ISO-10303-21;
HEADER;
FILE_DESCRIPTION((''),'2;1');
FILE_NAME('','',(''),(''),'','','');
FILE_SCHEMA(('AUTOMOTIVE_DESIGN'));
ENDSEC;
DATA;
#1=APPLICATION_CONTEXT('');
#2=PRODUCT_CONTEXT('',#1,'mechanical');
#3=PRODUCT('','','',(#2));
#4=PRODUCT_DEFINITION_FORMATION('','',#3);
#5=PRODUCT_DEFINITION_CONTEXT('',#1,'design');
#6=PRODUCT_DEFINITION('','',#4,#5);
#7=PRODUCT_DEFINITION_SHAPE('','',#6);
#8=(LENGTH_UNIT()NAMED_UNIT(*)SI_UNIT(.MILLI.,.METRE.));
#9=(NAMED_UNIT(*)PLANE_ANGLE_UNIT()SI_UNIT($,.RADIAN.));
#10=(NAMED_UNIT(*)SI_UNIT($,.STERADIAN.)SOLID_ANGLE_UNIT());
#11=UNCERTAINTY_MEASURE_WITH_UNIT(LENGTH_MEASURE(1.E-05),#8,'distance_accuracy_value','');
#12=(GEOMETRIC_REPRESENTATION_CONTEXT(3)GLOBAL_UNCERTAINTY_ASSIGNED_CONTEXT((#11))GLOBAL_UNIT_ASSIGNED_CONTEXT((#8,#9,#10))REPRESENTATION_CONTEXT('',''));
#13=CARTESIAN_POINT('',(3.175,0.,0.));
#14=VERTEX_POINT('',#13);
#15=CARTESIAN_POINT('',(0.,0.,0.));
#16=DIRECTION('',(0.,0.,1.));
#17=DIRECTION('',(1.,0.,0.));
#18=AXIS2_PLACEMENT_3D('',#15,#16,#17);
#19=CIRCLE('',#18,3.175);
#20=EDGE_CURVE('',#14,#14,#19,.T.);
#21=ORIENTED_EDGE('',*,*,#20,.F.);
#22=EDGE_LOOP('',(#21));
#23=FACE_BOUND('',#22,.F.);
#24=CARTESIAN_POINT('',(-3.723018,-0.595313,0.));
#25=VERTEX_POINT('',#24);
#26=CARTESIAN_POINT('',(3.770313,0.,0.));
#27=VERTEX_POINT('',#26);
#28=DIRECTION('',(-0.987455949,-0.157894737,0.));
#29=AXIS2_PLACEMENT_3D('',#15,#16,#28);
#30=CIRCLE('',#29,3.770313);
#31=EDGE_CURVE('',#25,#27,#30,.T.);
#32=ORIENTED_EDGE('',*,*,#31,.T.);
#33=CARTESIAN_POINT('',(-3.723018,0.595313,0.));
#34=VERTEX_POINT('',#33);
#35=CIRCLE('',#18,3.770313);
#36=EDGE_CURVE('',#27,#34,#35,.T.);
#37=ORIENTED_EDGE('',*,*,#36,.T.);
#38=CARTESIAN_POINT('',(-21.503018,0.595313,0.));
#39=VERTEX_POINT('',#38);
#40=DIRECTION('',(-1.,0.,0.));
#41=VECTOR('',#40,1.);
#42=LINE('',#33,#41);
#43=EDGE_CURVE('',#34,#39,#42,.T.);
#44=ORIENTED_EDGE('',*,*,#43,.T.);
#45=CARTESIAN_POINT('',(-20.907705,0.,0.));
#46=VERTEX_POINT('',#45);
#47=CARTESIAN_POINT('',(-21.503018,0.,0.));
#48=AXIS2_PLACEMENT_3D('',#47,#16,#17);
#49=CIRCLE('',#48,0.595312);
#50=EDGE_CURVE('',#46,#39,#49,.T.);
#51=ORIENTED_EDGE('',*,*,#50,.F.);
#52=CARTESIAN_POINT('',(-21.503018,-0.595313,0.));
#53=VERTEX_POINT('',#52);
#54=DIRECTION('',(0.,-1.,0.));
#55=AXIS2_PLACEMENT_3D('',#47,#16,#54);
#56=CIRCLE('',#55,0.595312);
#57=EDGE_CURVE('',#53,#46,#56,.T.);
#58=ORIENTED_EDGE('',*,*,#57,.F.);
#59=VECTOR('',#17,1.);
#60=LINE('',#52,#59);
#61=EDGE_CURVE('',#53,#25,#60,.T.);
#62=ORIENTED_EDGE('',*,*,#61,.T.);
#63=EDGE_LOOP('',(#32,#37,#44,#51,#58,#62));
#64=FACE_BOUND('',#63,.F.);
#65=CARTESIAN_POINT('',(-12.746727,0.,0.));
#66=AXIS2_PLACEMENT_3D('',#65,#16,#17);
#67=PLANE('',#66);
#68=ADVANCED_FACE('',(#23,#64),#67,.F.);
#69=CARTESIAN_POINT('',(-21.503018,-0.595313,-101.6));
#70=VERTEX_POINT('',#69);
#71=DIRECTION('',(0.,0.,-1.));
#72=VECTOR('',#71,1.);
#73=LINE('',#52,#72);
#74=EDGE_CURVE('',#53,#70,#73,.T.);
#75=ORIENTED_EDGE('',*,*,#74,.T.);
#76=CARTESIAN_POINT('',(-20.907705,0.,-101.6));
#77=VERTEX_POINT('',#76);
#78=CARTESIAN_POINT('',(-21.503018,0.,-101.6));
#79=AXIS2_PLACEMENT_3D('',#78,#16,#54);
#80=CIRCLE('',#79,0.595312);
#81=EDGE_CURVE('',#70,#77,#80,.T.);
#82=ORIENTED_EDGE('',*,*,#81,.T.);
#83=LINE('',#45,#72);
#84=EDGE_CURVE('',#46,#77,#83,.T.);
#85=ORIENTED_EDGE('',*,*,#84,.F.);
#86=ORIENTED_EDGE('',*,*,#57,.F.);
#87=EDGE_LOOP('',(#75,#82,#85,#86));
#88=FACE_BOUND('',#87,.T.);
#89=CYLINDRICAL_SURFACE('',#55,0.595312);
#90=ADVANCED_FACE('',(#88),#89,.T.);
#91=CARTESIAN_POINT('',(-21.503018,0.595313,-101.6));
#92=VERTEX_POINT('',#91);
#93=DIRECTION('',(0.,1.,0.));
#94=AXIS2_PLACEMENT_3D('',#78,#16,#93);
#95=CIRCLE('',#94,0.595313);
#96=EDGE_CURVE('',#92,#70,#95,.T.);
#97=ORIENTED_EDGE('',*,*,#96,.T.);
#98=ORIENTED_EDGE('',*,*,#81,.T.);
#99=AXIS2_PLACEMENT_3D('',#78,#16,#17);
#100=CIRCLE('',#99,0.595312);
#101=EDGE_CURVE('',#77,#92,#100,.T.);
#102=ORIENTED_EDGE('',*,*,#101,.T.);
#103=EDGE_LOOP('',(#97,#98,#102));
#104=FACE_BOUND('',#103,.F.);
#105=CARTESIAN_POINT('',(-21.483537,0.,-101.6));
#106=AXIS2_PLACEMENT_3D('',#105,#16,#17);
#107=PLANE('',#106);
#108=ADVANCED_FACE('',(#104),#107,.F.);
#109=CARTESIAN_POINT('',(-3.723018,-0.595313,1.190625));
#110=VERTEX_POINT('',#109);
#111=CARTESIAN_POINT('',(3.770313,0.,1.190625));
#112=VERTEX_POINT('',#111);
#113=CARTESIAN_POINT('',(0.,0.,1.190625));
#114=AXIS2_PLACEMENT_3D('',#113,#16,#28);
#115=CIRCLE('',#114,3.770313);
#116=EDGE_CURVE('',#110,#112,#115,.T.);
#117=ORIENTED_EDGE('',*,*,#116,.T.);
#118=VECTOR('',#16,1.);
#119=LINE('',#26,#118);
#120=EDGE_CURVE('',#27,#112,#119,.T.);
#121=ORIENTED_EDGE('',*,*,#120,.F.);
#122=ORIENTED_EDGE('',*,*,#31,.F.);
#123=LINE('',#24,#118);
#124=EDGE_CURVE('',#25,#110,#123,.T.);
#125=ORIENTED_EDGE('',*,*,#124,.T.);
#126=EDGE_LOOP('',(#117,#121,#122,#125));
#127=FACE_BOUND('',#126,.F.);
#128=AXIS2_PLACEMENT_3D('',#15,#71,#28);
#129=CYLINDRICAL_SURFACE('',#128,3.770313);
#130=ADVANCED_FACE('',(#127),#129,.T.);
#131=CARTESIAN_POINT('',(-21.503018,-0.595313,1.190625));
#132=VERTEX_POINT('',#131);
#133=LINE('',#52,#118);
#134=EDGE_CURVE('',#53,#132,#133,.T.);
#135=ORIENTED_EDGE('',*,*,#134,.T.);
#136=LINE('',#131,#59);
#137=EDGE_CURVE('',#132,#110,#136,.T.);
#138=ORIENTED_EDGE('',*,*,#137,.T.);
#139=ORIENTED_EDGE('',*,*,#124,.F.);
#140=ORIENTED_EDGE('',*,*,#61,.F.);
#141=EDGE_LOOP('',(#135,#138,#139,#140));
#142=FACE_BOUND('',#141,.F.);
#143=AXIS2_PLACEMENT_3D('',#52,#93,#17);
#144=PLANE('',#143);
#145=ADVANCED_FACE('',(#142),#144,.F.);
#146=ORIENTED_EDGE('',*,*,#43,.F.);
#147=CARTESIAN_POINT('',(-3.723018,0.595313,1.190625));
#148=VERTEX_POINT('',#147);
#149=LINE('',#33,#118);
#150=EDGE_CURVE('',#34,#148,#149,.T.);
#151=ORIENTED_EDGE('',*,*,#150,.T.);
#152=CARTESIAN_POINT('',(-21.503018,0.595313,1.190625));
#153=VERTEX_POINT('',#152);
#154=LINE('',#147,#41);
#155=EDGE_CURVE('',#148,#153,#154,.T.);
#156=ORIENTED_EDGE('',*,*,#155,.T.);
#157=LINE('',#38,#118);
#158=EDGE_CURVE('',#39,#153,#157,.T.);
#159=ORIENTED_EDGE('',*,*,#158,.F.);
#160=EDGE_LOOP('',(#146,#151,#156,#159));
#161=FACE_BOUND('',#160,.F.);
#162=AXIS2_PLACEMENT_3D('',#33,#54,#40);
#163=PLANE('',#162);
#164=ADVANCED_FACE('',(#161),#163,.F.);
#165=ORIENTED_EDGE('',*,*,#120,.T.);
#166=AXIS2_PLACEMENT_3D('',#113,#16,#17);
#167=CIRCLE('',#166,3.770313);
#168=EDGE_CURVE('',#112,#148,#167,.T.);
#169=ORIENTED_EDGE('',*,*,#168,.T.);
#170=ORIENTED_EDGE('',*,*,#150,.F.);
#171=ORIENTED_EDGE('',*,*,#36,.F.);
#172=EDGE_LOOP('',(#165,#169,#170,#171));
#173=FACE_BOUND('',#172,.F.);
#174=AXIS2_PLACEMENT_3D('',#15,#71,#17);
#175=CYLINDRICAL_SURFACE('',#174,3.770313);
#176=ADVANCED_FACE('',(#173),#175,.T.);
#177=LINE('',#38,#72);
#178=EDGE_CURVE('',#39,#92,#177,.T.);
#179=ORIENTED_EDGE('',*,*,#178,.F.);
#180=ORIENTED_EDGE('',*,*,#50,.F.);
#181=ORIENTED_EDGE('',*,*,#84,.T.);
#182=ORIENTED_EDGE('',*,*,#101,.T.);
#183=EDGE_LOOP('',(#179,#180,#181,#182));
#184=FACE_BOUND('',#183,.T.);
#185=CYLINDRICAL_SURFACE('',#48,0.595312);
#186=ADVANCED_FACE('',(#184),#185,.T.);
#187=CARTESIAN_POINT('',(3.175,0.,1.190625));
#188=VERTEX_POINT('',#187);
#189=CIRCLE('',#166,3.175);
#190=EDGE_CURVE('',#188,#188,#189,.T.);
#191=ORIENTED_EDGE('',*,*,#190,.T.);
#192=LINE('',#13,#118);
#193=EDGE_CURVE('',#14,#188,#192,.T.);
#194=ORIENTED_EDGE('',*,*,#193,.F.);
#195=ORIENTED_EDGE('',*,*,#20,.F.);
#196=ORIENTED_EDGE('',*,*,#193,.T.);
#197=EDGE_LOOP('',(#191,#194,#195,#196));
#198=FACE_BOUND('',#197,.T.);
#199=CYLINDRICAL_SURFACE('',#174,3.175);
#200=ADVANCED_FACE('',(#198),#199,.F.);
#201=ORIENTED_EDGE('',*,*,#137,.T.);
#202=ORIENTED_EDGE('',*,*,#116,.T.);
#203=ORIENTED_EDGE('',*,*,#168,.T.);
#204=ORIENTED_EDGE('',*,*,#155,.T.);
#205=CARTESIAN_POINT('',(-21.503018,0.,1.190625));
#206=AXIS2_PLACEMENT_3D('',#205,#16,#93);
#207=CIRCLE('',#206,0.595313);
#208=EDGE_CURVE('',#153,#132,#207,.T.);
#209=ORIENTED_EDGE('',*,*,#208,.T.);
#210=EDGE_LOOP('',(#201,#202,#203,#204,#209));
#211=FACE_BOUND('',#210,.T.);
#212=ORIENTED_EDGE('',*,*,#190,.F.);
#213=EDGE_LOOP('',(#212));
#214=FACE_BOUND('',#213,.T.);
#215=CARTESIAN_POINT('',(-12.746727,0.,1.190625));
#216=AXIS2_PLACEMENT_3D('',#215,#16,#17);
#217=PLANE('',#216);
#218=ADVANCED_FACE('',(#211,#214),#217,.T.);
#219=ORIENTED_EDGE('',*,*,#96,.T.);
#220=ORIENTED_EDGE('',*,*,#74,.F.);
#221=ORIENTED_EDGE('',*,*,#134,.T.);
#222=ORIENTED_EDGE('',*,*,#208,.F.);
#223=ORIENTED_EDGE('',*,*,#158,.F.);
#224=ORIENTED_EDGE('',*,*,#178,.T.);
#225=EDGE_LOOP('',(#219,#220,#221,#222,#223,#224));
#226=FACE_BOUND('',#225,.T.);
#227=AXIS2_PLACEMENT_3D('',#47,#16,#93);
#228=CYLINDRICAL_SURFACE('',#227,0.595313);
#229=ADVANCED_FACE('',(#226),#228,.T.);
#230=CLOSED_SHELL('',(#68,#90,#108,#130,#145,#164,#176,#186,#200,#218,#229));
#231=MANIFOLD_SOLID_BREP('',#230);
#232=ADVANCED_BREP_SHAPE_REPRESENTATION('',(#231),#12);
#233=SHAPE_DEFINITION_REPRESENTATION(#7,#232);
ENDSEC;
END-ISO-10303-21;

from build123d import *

# Parameters (mm, degrees)
F0_R     = 3.175
F1_DEPTH = 1.190625
F2_DEPTH = 101.6


# Not quite as in the source:
# - a length typed as a fraction of an inch, garbled in the dataset ("3 / 203.2 mm" for 3/8 in), is restored


with BuildPart() as f1:
    # F0 (on Top) → F1 (new body)
    with BuildSketch(Plane.XY):
        with BuildLine():
            ThreePointArc((-3.7230175094, -0.5953125), (-3.7703125, 0), (-3.7230175094, 0.5953125))
            Line((-3.7230175094, 0.5953125), (-21.5030175094, 0.5953125))
            ThreePointArc((-21.5030175094, 0.5953125), (-21.0820680037, 0.4209495057), (-20.9077050094, 0))
            ThreePointArc((-20.9077050094, 0), (-21.0820680037, -0.4209495057), (-21.5030175094, -0.5953125))
            Line((-21.5030175094, -0.5953125), (-3.7230175094, -0.5953125))
        make_face()
        with BuildLine():
            ThreePointArc((-3.7230175094, -0.5953125), (0.2985941178, -3.7584701543), (3.7703125, 0))
            ThreePointArc((3.7703125, 0), (0.2985941178, 3.7584701543), (-3.7230175094, 0.5953125))
            ThreePointArc((-3.7230175094, 0.5953125), (-3.7703125, 0), (-3.7230175094, -0.5953125))
        make_face()
        Circle(F0_R, mode=Mode.SUBTRACT)
        with BuildLine():
            ThreePointArc((-20.9077050094, 0), (-21.0820680037, 0.4209495057), (-21.5030175094, 0.5953125))
            ThreePointArc((-21.5030175094, 0.5953125), (-22.0983300094, 0), (-21.5030175094, -0.5953125))
            ThreePointArc((-21.5030175094, -0.5953125), (-21.0820680037, -0.4209495057), (-20.9077050094, 0))
        make_face()
    extrude(amount=F1_DEPTH)

    # F0 (on Top) → F2 (join)
    with BuildSketch(Plane.XY):
        with BuildLine():
            ThreePointArc((-20.9077050094, 0), (-21.0820680037, 0.4209495057), (-21.5030175094, 0.5953125))
            ThreePointArc((-21.5030175094, 0.5953125), (-22.0983300094, 0), (-21.5030175094, -0.5953125))
            ThreePointArc((-21.5030175094, -0.5953125), (-21.0820680037, -0.4209495057), (-20.9077050094, 0))
        make_face()
    extrude(amount=-F2_DEPTH)


solid = f1.part
